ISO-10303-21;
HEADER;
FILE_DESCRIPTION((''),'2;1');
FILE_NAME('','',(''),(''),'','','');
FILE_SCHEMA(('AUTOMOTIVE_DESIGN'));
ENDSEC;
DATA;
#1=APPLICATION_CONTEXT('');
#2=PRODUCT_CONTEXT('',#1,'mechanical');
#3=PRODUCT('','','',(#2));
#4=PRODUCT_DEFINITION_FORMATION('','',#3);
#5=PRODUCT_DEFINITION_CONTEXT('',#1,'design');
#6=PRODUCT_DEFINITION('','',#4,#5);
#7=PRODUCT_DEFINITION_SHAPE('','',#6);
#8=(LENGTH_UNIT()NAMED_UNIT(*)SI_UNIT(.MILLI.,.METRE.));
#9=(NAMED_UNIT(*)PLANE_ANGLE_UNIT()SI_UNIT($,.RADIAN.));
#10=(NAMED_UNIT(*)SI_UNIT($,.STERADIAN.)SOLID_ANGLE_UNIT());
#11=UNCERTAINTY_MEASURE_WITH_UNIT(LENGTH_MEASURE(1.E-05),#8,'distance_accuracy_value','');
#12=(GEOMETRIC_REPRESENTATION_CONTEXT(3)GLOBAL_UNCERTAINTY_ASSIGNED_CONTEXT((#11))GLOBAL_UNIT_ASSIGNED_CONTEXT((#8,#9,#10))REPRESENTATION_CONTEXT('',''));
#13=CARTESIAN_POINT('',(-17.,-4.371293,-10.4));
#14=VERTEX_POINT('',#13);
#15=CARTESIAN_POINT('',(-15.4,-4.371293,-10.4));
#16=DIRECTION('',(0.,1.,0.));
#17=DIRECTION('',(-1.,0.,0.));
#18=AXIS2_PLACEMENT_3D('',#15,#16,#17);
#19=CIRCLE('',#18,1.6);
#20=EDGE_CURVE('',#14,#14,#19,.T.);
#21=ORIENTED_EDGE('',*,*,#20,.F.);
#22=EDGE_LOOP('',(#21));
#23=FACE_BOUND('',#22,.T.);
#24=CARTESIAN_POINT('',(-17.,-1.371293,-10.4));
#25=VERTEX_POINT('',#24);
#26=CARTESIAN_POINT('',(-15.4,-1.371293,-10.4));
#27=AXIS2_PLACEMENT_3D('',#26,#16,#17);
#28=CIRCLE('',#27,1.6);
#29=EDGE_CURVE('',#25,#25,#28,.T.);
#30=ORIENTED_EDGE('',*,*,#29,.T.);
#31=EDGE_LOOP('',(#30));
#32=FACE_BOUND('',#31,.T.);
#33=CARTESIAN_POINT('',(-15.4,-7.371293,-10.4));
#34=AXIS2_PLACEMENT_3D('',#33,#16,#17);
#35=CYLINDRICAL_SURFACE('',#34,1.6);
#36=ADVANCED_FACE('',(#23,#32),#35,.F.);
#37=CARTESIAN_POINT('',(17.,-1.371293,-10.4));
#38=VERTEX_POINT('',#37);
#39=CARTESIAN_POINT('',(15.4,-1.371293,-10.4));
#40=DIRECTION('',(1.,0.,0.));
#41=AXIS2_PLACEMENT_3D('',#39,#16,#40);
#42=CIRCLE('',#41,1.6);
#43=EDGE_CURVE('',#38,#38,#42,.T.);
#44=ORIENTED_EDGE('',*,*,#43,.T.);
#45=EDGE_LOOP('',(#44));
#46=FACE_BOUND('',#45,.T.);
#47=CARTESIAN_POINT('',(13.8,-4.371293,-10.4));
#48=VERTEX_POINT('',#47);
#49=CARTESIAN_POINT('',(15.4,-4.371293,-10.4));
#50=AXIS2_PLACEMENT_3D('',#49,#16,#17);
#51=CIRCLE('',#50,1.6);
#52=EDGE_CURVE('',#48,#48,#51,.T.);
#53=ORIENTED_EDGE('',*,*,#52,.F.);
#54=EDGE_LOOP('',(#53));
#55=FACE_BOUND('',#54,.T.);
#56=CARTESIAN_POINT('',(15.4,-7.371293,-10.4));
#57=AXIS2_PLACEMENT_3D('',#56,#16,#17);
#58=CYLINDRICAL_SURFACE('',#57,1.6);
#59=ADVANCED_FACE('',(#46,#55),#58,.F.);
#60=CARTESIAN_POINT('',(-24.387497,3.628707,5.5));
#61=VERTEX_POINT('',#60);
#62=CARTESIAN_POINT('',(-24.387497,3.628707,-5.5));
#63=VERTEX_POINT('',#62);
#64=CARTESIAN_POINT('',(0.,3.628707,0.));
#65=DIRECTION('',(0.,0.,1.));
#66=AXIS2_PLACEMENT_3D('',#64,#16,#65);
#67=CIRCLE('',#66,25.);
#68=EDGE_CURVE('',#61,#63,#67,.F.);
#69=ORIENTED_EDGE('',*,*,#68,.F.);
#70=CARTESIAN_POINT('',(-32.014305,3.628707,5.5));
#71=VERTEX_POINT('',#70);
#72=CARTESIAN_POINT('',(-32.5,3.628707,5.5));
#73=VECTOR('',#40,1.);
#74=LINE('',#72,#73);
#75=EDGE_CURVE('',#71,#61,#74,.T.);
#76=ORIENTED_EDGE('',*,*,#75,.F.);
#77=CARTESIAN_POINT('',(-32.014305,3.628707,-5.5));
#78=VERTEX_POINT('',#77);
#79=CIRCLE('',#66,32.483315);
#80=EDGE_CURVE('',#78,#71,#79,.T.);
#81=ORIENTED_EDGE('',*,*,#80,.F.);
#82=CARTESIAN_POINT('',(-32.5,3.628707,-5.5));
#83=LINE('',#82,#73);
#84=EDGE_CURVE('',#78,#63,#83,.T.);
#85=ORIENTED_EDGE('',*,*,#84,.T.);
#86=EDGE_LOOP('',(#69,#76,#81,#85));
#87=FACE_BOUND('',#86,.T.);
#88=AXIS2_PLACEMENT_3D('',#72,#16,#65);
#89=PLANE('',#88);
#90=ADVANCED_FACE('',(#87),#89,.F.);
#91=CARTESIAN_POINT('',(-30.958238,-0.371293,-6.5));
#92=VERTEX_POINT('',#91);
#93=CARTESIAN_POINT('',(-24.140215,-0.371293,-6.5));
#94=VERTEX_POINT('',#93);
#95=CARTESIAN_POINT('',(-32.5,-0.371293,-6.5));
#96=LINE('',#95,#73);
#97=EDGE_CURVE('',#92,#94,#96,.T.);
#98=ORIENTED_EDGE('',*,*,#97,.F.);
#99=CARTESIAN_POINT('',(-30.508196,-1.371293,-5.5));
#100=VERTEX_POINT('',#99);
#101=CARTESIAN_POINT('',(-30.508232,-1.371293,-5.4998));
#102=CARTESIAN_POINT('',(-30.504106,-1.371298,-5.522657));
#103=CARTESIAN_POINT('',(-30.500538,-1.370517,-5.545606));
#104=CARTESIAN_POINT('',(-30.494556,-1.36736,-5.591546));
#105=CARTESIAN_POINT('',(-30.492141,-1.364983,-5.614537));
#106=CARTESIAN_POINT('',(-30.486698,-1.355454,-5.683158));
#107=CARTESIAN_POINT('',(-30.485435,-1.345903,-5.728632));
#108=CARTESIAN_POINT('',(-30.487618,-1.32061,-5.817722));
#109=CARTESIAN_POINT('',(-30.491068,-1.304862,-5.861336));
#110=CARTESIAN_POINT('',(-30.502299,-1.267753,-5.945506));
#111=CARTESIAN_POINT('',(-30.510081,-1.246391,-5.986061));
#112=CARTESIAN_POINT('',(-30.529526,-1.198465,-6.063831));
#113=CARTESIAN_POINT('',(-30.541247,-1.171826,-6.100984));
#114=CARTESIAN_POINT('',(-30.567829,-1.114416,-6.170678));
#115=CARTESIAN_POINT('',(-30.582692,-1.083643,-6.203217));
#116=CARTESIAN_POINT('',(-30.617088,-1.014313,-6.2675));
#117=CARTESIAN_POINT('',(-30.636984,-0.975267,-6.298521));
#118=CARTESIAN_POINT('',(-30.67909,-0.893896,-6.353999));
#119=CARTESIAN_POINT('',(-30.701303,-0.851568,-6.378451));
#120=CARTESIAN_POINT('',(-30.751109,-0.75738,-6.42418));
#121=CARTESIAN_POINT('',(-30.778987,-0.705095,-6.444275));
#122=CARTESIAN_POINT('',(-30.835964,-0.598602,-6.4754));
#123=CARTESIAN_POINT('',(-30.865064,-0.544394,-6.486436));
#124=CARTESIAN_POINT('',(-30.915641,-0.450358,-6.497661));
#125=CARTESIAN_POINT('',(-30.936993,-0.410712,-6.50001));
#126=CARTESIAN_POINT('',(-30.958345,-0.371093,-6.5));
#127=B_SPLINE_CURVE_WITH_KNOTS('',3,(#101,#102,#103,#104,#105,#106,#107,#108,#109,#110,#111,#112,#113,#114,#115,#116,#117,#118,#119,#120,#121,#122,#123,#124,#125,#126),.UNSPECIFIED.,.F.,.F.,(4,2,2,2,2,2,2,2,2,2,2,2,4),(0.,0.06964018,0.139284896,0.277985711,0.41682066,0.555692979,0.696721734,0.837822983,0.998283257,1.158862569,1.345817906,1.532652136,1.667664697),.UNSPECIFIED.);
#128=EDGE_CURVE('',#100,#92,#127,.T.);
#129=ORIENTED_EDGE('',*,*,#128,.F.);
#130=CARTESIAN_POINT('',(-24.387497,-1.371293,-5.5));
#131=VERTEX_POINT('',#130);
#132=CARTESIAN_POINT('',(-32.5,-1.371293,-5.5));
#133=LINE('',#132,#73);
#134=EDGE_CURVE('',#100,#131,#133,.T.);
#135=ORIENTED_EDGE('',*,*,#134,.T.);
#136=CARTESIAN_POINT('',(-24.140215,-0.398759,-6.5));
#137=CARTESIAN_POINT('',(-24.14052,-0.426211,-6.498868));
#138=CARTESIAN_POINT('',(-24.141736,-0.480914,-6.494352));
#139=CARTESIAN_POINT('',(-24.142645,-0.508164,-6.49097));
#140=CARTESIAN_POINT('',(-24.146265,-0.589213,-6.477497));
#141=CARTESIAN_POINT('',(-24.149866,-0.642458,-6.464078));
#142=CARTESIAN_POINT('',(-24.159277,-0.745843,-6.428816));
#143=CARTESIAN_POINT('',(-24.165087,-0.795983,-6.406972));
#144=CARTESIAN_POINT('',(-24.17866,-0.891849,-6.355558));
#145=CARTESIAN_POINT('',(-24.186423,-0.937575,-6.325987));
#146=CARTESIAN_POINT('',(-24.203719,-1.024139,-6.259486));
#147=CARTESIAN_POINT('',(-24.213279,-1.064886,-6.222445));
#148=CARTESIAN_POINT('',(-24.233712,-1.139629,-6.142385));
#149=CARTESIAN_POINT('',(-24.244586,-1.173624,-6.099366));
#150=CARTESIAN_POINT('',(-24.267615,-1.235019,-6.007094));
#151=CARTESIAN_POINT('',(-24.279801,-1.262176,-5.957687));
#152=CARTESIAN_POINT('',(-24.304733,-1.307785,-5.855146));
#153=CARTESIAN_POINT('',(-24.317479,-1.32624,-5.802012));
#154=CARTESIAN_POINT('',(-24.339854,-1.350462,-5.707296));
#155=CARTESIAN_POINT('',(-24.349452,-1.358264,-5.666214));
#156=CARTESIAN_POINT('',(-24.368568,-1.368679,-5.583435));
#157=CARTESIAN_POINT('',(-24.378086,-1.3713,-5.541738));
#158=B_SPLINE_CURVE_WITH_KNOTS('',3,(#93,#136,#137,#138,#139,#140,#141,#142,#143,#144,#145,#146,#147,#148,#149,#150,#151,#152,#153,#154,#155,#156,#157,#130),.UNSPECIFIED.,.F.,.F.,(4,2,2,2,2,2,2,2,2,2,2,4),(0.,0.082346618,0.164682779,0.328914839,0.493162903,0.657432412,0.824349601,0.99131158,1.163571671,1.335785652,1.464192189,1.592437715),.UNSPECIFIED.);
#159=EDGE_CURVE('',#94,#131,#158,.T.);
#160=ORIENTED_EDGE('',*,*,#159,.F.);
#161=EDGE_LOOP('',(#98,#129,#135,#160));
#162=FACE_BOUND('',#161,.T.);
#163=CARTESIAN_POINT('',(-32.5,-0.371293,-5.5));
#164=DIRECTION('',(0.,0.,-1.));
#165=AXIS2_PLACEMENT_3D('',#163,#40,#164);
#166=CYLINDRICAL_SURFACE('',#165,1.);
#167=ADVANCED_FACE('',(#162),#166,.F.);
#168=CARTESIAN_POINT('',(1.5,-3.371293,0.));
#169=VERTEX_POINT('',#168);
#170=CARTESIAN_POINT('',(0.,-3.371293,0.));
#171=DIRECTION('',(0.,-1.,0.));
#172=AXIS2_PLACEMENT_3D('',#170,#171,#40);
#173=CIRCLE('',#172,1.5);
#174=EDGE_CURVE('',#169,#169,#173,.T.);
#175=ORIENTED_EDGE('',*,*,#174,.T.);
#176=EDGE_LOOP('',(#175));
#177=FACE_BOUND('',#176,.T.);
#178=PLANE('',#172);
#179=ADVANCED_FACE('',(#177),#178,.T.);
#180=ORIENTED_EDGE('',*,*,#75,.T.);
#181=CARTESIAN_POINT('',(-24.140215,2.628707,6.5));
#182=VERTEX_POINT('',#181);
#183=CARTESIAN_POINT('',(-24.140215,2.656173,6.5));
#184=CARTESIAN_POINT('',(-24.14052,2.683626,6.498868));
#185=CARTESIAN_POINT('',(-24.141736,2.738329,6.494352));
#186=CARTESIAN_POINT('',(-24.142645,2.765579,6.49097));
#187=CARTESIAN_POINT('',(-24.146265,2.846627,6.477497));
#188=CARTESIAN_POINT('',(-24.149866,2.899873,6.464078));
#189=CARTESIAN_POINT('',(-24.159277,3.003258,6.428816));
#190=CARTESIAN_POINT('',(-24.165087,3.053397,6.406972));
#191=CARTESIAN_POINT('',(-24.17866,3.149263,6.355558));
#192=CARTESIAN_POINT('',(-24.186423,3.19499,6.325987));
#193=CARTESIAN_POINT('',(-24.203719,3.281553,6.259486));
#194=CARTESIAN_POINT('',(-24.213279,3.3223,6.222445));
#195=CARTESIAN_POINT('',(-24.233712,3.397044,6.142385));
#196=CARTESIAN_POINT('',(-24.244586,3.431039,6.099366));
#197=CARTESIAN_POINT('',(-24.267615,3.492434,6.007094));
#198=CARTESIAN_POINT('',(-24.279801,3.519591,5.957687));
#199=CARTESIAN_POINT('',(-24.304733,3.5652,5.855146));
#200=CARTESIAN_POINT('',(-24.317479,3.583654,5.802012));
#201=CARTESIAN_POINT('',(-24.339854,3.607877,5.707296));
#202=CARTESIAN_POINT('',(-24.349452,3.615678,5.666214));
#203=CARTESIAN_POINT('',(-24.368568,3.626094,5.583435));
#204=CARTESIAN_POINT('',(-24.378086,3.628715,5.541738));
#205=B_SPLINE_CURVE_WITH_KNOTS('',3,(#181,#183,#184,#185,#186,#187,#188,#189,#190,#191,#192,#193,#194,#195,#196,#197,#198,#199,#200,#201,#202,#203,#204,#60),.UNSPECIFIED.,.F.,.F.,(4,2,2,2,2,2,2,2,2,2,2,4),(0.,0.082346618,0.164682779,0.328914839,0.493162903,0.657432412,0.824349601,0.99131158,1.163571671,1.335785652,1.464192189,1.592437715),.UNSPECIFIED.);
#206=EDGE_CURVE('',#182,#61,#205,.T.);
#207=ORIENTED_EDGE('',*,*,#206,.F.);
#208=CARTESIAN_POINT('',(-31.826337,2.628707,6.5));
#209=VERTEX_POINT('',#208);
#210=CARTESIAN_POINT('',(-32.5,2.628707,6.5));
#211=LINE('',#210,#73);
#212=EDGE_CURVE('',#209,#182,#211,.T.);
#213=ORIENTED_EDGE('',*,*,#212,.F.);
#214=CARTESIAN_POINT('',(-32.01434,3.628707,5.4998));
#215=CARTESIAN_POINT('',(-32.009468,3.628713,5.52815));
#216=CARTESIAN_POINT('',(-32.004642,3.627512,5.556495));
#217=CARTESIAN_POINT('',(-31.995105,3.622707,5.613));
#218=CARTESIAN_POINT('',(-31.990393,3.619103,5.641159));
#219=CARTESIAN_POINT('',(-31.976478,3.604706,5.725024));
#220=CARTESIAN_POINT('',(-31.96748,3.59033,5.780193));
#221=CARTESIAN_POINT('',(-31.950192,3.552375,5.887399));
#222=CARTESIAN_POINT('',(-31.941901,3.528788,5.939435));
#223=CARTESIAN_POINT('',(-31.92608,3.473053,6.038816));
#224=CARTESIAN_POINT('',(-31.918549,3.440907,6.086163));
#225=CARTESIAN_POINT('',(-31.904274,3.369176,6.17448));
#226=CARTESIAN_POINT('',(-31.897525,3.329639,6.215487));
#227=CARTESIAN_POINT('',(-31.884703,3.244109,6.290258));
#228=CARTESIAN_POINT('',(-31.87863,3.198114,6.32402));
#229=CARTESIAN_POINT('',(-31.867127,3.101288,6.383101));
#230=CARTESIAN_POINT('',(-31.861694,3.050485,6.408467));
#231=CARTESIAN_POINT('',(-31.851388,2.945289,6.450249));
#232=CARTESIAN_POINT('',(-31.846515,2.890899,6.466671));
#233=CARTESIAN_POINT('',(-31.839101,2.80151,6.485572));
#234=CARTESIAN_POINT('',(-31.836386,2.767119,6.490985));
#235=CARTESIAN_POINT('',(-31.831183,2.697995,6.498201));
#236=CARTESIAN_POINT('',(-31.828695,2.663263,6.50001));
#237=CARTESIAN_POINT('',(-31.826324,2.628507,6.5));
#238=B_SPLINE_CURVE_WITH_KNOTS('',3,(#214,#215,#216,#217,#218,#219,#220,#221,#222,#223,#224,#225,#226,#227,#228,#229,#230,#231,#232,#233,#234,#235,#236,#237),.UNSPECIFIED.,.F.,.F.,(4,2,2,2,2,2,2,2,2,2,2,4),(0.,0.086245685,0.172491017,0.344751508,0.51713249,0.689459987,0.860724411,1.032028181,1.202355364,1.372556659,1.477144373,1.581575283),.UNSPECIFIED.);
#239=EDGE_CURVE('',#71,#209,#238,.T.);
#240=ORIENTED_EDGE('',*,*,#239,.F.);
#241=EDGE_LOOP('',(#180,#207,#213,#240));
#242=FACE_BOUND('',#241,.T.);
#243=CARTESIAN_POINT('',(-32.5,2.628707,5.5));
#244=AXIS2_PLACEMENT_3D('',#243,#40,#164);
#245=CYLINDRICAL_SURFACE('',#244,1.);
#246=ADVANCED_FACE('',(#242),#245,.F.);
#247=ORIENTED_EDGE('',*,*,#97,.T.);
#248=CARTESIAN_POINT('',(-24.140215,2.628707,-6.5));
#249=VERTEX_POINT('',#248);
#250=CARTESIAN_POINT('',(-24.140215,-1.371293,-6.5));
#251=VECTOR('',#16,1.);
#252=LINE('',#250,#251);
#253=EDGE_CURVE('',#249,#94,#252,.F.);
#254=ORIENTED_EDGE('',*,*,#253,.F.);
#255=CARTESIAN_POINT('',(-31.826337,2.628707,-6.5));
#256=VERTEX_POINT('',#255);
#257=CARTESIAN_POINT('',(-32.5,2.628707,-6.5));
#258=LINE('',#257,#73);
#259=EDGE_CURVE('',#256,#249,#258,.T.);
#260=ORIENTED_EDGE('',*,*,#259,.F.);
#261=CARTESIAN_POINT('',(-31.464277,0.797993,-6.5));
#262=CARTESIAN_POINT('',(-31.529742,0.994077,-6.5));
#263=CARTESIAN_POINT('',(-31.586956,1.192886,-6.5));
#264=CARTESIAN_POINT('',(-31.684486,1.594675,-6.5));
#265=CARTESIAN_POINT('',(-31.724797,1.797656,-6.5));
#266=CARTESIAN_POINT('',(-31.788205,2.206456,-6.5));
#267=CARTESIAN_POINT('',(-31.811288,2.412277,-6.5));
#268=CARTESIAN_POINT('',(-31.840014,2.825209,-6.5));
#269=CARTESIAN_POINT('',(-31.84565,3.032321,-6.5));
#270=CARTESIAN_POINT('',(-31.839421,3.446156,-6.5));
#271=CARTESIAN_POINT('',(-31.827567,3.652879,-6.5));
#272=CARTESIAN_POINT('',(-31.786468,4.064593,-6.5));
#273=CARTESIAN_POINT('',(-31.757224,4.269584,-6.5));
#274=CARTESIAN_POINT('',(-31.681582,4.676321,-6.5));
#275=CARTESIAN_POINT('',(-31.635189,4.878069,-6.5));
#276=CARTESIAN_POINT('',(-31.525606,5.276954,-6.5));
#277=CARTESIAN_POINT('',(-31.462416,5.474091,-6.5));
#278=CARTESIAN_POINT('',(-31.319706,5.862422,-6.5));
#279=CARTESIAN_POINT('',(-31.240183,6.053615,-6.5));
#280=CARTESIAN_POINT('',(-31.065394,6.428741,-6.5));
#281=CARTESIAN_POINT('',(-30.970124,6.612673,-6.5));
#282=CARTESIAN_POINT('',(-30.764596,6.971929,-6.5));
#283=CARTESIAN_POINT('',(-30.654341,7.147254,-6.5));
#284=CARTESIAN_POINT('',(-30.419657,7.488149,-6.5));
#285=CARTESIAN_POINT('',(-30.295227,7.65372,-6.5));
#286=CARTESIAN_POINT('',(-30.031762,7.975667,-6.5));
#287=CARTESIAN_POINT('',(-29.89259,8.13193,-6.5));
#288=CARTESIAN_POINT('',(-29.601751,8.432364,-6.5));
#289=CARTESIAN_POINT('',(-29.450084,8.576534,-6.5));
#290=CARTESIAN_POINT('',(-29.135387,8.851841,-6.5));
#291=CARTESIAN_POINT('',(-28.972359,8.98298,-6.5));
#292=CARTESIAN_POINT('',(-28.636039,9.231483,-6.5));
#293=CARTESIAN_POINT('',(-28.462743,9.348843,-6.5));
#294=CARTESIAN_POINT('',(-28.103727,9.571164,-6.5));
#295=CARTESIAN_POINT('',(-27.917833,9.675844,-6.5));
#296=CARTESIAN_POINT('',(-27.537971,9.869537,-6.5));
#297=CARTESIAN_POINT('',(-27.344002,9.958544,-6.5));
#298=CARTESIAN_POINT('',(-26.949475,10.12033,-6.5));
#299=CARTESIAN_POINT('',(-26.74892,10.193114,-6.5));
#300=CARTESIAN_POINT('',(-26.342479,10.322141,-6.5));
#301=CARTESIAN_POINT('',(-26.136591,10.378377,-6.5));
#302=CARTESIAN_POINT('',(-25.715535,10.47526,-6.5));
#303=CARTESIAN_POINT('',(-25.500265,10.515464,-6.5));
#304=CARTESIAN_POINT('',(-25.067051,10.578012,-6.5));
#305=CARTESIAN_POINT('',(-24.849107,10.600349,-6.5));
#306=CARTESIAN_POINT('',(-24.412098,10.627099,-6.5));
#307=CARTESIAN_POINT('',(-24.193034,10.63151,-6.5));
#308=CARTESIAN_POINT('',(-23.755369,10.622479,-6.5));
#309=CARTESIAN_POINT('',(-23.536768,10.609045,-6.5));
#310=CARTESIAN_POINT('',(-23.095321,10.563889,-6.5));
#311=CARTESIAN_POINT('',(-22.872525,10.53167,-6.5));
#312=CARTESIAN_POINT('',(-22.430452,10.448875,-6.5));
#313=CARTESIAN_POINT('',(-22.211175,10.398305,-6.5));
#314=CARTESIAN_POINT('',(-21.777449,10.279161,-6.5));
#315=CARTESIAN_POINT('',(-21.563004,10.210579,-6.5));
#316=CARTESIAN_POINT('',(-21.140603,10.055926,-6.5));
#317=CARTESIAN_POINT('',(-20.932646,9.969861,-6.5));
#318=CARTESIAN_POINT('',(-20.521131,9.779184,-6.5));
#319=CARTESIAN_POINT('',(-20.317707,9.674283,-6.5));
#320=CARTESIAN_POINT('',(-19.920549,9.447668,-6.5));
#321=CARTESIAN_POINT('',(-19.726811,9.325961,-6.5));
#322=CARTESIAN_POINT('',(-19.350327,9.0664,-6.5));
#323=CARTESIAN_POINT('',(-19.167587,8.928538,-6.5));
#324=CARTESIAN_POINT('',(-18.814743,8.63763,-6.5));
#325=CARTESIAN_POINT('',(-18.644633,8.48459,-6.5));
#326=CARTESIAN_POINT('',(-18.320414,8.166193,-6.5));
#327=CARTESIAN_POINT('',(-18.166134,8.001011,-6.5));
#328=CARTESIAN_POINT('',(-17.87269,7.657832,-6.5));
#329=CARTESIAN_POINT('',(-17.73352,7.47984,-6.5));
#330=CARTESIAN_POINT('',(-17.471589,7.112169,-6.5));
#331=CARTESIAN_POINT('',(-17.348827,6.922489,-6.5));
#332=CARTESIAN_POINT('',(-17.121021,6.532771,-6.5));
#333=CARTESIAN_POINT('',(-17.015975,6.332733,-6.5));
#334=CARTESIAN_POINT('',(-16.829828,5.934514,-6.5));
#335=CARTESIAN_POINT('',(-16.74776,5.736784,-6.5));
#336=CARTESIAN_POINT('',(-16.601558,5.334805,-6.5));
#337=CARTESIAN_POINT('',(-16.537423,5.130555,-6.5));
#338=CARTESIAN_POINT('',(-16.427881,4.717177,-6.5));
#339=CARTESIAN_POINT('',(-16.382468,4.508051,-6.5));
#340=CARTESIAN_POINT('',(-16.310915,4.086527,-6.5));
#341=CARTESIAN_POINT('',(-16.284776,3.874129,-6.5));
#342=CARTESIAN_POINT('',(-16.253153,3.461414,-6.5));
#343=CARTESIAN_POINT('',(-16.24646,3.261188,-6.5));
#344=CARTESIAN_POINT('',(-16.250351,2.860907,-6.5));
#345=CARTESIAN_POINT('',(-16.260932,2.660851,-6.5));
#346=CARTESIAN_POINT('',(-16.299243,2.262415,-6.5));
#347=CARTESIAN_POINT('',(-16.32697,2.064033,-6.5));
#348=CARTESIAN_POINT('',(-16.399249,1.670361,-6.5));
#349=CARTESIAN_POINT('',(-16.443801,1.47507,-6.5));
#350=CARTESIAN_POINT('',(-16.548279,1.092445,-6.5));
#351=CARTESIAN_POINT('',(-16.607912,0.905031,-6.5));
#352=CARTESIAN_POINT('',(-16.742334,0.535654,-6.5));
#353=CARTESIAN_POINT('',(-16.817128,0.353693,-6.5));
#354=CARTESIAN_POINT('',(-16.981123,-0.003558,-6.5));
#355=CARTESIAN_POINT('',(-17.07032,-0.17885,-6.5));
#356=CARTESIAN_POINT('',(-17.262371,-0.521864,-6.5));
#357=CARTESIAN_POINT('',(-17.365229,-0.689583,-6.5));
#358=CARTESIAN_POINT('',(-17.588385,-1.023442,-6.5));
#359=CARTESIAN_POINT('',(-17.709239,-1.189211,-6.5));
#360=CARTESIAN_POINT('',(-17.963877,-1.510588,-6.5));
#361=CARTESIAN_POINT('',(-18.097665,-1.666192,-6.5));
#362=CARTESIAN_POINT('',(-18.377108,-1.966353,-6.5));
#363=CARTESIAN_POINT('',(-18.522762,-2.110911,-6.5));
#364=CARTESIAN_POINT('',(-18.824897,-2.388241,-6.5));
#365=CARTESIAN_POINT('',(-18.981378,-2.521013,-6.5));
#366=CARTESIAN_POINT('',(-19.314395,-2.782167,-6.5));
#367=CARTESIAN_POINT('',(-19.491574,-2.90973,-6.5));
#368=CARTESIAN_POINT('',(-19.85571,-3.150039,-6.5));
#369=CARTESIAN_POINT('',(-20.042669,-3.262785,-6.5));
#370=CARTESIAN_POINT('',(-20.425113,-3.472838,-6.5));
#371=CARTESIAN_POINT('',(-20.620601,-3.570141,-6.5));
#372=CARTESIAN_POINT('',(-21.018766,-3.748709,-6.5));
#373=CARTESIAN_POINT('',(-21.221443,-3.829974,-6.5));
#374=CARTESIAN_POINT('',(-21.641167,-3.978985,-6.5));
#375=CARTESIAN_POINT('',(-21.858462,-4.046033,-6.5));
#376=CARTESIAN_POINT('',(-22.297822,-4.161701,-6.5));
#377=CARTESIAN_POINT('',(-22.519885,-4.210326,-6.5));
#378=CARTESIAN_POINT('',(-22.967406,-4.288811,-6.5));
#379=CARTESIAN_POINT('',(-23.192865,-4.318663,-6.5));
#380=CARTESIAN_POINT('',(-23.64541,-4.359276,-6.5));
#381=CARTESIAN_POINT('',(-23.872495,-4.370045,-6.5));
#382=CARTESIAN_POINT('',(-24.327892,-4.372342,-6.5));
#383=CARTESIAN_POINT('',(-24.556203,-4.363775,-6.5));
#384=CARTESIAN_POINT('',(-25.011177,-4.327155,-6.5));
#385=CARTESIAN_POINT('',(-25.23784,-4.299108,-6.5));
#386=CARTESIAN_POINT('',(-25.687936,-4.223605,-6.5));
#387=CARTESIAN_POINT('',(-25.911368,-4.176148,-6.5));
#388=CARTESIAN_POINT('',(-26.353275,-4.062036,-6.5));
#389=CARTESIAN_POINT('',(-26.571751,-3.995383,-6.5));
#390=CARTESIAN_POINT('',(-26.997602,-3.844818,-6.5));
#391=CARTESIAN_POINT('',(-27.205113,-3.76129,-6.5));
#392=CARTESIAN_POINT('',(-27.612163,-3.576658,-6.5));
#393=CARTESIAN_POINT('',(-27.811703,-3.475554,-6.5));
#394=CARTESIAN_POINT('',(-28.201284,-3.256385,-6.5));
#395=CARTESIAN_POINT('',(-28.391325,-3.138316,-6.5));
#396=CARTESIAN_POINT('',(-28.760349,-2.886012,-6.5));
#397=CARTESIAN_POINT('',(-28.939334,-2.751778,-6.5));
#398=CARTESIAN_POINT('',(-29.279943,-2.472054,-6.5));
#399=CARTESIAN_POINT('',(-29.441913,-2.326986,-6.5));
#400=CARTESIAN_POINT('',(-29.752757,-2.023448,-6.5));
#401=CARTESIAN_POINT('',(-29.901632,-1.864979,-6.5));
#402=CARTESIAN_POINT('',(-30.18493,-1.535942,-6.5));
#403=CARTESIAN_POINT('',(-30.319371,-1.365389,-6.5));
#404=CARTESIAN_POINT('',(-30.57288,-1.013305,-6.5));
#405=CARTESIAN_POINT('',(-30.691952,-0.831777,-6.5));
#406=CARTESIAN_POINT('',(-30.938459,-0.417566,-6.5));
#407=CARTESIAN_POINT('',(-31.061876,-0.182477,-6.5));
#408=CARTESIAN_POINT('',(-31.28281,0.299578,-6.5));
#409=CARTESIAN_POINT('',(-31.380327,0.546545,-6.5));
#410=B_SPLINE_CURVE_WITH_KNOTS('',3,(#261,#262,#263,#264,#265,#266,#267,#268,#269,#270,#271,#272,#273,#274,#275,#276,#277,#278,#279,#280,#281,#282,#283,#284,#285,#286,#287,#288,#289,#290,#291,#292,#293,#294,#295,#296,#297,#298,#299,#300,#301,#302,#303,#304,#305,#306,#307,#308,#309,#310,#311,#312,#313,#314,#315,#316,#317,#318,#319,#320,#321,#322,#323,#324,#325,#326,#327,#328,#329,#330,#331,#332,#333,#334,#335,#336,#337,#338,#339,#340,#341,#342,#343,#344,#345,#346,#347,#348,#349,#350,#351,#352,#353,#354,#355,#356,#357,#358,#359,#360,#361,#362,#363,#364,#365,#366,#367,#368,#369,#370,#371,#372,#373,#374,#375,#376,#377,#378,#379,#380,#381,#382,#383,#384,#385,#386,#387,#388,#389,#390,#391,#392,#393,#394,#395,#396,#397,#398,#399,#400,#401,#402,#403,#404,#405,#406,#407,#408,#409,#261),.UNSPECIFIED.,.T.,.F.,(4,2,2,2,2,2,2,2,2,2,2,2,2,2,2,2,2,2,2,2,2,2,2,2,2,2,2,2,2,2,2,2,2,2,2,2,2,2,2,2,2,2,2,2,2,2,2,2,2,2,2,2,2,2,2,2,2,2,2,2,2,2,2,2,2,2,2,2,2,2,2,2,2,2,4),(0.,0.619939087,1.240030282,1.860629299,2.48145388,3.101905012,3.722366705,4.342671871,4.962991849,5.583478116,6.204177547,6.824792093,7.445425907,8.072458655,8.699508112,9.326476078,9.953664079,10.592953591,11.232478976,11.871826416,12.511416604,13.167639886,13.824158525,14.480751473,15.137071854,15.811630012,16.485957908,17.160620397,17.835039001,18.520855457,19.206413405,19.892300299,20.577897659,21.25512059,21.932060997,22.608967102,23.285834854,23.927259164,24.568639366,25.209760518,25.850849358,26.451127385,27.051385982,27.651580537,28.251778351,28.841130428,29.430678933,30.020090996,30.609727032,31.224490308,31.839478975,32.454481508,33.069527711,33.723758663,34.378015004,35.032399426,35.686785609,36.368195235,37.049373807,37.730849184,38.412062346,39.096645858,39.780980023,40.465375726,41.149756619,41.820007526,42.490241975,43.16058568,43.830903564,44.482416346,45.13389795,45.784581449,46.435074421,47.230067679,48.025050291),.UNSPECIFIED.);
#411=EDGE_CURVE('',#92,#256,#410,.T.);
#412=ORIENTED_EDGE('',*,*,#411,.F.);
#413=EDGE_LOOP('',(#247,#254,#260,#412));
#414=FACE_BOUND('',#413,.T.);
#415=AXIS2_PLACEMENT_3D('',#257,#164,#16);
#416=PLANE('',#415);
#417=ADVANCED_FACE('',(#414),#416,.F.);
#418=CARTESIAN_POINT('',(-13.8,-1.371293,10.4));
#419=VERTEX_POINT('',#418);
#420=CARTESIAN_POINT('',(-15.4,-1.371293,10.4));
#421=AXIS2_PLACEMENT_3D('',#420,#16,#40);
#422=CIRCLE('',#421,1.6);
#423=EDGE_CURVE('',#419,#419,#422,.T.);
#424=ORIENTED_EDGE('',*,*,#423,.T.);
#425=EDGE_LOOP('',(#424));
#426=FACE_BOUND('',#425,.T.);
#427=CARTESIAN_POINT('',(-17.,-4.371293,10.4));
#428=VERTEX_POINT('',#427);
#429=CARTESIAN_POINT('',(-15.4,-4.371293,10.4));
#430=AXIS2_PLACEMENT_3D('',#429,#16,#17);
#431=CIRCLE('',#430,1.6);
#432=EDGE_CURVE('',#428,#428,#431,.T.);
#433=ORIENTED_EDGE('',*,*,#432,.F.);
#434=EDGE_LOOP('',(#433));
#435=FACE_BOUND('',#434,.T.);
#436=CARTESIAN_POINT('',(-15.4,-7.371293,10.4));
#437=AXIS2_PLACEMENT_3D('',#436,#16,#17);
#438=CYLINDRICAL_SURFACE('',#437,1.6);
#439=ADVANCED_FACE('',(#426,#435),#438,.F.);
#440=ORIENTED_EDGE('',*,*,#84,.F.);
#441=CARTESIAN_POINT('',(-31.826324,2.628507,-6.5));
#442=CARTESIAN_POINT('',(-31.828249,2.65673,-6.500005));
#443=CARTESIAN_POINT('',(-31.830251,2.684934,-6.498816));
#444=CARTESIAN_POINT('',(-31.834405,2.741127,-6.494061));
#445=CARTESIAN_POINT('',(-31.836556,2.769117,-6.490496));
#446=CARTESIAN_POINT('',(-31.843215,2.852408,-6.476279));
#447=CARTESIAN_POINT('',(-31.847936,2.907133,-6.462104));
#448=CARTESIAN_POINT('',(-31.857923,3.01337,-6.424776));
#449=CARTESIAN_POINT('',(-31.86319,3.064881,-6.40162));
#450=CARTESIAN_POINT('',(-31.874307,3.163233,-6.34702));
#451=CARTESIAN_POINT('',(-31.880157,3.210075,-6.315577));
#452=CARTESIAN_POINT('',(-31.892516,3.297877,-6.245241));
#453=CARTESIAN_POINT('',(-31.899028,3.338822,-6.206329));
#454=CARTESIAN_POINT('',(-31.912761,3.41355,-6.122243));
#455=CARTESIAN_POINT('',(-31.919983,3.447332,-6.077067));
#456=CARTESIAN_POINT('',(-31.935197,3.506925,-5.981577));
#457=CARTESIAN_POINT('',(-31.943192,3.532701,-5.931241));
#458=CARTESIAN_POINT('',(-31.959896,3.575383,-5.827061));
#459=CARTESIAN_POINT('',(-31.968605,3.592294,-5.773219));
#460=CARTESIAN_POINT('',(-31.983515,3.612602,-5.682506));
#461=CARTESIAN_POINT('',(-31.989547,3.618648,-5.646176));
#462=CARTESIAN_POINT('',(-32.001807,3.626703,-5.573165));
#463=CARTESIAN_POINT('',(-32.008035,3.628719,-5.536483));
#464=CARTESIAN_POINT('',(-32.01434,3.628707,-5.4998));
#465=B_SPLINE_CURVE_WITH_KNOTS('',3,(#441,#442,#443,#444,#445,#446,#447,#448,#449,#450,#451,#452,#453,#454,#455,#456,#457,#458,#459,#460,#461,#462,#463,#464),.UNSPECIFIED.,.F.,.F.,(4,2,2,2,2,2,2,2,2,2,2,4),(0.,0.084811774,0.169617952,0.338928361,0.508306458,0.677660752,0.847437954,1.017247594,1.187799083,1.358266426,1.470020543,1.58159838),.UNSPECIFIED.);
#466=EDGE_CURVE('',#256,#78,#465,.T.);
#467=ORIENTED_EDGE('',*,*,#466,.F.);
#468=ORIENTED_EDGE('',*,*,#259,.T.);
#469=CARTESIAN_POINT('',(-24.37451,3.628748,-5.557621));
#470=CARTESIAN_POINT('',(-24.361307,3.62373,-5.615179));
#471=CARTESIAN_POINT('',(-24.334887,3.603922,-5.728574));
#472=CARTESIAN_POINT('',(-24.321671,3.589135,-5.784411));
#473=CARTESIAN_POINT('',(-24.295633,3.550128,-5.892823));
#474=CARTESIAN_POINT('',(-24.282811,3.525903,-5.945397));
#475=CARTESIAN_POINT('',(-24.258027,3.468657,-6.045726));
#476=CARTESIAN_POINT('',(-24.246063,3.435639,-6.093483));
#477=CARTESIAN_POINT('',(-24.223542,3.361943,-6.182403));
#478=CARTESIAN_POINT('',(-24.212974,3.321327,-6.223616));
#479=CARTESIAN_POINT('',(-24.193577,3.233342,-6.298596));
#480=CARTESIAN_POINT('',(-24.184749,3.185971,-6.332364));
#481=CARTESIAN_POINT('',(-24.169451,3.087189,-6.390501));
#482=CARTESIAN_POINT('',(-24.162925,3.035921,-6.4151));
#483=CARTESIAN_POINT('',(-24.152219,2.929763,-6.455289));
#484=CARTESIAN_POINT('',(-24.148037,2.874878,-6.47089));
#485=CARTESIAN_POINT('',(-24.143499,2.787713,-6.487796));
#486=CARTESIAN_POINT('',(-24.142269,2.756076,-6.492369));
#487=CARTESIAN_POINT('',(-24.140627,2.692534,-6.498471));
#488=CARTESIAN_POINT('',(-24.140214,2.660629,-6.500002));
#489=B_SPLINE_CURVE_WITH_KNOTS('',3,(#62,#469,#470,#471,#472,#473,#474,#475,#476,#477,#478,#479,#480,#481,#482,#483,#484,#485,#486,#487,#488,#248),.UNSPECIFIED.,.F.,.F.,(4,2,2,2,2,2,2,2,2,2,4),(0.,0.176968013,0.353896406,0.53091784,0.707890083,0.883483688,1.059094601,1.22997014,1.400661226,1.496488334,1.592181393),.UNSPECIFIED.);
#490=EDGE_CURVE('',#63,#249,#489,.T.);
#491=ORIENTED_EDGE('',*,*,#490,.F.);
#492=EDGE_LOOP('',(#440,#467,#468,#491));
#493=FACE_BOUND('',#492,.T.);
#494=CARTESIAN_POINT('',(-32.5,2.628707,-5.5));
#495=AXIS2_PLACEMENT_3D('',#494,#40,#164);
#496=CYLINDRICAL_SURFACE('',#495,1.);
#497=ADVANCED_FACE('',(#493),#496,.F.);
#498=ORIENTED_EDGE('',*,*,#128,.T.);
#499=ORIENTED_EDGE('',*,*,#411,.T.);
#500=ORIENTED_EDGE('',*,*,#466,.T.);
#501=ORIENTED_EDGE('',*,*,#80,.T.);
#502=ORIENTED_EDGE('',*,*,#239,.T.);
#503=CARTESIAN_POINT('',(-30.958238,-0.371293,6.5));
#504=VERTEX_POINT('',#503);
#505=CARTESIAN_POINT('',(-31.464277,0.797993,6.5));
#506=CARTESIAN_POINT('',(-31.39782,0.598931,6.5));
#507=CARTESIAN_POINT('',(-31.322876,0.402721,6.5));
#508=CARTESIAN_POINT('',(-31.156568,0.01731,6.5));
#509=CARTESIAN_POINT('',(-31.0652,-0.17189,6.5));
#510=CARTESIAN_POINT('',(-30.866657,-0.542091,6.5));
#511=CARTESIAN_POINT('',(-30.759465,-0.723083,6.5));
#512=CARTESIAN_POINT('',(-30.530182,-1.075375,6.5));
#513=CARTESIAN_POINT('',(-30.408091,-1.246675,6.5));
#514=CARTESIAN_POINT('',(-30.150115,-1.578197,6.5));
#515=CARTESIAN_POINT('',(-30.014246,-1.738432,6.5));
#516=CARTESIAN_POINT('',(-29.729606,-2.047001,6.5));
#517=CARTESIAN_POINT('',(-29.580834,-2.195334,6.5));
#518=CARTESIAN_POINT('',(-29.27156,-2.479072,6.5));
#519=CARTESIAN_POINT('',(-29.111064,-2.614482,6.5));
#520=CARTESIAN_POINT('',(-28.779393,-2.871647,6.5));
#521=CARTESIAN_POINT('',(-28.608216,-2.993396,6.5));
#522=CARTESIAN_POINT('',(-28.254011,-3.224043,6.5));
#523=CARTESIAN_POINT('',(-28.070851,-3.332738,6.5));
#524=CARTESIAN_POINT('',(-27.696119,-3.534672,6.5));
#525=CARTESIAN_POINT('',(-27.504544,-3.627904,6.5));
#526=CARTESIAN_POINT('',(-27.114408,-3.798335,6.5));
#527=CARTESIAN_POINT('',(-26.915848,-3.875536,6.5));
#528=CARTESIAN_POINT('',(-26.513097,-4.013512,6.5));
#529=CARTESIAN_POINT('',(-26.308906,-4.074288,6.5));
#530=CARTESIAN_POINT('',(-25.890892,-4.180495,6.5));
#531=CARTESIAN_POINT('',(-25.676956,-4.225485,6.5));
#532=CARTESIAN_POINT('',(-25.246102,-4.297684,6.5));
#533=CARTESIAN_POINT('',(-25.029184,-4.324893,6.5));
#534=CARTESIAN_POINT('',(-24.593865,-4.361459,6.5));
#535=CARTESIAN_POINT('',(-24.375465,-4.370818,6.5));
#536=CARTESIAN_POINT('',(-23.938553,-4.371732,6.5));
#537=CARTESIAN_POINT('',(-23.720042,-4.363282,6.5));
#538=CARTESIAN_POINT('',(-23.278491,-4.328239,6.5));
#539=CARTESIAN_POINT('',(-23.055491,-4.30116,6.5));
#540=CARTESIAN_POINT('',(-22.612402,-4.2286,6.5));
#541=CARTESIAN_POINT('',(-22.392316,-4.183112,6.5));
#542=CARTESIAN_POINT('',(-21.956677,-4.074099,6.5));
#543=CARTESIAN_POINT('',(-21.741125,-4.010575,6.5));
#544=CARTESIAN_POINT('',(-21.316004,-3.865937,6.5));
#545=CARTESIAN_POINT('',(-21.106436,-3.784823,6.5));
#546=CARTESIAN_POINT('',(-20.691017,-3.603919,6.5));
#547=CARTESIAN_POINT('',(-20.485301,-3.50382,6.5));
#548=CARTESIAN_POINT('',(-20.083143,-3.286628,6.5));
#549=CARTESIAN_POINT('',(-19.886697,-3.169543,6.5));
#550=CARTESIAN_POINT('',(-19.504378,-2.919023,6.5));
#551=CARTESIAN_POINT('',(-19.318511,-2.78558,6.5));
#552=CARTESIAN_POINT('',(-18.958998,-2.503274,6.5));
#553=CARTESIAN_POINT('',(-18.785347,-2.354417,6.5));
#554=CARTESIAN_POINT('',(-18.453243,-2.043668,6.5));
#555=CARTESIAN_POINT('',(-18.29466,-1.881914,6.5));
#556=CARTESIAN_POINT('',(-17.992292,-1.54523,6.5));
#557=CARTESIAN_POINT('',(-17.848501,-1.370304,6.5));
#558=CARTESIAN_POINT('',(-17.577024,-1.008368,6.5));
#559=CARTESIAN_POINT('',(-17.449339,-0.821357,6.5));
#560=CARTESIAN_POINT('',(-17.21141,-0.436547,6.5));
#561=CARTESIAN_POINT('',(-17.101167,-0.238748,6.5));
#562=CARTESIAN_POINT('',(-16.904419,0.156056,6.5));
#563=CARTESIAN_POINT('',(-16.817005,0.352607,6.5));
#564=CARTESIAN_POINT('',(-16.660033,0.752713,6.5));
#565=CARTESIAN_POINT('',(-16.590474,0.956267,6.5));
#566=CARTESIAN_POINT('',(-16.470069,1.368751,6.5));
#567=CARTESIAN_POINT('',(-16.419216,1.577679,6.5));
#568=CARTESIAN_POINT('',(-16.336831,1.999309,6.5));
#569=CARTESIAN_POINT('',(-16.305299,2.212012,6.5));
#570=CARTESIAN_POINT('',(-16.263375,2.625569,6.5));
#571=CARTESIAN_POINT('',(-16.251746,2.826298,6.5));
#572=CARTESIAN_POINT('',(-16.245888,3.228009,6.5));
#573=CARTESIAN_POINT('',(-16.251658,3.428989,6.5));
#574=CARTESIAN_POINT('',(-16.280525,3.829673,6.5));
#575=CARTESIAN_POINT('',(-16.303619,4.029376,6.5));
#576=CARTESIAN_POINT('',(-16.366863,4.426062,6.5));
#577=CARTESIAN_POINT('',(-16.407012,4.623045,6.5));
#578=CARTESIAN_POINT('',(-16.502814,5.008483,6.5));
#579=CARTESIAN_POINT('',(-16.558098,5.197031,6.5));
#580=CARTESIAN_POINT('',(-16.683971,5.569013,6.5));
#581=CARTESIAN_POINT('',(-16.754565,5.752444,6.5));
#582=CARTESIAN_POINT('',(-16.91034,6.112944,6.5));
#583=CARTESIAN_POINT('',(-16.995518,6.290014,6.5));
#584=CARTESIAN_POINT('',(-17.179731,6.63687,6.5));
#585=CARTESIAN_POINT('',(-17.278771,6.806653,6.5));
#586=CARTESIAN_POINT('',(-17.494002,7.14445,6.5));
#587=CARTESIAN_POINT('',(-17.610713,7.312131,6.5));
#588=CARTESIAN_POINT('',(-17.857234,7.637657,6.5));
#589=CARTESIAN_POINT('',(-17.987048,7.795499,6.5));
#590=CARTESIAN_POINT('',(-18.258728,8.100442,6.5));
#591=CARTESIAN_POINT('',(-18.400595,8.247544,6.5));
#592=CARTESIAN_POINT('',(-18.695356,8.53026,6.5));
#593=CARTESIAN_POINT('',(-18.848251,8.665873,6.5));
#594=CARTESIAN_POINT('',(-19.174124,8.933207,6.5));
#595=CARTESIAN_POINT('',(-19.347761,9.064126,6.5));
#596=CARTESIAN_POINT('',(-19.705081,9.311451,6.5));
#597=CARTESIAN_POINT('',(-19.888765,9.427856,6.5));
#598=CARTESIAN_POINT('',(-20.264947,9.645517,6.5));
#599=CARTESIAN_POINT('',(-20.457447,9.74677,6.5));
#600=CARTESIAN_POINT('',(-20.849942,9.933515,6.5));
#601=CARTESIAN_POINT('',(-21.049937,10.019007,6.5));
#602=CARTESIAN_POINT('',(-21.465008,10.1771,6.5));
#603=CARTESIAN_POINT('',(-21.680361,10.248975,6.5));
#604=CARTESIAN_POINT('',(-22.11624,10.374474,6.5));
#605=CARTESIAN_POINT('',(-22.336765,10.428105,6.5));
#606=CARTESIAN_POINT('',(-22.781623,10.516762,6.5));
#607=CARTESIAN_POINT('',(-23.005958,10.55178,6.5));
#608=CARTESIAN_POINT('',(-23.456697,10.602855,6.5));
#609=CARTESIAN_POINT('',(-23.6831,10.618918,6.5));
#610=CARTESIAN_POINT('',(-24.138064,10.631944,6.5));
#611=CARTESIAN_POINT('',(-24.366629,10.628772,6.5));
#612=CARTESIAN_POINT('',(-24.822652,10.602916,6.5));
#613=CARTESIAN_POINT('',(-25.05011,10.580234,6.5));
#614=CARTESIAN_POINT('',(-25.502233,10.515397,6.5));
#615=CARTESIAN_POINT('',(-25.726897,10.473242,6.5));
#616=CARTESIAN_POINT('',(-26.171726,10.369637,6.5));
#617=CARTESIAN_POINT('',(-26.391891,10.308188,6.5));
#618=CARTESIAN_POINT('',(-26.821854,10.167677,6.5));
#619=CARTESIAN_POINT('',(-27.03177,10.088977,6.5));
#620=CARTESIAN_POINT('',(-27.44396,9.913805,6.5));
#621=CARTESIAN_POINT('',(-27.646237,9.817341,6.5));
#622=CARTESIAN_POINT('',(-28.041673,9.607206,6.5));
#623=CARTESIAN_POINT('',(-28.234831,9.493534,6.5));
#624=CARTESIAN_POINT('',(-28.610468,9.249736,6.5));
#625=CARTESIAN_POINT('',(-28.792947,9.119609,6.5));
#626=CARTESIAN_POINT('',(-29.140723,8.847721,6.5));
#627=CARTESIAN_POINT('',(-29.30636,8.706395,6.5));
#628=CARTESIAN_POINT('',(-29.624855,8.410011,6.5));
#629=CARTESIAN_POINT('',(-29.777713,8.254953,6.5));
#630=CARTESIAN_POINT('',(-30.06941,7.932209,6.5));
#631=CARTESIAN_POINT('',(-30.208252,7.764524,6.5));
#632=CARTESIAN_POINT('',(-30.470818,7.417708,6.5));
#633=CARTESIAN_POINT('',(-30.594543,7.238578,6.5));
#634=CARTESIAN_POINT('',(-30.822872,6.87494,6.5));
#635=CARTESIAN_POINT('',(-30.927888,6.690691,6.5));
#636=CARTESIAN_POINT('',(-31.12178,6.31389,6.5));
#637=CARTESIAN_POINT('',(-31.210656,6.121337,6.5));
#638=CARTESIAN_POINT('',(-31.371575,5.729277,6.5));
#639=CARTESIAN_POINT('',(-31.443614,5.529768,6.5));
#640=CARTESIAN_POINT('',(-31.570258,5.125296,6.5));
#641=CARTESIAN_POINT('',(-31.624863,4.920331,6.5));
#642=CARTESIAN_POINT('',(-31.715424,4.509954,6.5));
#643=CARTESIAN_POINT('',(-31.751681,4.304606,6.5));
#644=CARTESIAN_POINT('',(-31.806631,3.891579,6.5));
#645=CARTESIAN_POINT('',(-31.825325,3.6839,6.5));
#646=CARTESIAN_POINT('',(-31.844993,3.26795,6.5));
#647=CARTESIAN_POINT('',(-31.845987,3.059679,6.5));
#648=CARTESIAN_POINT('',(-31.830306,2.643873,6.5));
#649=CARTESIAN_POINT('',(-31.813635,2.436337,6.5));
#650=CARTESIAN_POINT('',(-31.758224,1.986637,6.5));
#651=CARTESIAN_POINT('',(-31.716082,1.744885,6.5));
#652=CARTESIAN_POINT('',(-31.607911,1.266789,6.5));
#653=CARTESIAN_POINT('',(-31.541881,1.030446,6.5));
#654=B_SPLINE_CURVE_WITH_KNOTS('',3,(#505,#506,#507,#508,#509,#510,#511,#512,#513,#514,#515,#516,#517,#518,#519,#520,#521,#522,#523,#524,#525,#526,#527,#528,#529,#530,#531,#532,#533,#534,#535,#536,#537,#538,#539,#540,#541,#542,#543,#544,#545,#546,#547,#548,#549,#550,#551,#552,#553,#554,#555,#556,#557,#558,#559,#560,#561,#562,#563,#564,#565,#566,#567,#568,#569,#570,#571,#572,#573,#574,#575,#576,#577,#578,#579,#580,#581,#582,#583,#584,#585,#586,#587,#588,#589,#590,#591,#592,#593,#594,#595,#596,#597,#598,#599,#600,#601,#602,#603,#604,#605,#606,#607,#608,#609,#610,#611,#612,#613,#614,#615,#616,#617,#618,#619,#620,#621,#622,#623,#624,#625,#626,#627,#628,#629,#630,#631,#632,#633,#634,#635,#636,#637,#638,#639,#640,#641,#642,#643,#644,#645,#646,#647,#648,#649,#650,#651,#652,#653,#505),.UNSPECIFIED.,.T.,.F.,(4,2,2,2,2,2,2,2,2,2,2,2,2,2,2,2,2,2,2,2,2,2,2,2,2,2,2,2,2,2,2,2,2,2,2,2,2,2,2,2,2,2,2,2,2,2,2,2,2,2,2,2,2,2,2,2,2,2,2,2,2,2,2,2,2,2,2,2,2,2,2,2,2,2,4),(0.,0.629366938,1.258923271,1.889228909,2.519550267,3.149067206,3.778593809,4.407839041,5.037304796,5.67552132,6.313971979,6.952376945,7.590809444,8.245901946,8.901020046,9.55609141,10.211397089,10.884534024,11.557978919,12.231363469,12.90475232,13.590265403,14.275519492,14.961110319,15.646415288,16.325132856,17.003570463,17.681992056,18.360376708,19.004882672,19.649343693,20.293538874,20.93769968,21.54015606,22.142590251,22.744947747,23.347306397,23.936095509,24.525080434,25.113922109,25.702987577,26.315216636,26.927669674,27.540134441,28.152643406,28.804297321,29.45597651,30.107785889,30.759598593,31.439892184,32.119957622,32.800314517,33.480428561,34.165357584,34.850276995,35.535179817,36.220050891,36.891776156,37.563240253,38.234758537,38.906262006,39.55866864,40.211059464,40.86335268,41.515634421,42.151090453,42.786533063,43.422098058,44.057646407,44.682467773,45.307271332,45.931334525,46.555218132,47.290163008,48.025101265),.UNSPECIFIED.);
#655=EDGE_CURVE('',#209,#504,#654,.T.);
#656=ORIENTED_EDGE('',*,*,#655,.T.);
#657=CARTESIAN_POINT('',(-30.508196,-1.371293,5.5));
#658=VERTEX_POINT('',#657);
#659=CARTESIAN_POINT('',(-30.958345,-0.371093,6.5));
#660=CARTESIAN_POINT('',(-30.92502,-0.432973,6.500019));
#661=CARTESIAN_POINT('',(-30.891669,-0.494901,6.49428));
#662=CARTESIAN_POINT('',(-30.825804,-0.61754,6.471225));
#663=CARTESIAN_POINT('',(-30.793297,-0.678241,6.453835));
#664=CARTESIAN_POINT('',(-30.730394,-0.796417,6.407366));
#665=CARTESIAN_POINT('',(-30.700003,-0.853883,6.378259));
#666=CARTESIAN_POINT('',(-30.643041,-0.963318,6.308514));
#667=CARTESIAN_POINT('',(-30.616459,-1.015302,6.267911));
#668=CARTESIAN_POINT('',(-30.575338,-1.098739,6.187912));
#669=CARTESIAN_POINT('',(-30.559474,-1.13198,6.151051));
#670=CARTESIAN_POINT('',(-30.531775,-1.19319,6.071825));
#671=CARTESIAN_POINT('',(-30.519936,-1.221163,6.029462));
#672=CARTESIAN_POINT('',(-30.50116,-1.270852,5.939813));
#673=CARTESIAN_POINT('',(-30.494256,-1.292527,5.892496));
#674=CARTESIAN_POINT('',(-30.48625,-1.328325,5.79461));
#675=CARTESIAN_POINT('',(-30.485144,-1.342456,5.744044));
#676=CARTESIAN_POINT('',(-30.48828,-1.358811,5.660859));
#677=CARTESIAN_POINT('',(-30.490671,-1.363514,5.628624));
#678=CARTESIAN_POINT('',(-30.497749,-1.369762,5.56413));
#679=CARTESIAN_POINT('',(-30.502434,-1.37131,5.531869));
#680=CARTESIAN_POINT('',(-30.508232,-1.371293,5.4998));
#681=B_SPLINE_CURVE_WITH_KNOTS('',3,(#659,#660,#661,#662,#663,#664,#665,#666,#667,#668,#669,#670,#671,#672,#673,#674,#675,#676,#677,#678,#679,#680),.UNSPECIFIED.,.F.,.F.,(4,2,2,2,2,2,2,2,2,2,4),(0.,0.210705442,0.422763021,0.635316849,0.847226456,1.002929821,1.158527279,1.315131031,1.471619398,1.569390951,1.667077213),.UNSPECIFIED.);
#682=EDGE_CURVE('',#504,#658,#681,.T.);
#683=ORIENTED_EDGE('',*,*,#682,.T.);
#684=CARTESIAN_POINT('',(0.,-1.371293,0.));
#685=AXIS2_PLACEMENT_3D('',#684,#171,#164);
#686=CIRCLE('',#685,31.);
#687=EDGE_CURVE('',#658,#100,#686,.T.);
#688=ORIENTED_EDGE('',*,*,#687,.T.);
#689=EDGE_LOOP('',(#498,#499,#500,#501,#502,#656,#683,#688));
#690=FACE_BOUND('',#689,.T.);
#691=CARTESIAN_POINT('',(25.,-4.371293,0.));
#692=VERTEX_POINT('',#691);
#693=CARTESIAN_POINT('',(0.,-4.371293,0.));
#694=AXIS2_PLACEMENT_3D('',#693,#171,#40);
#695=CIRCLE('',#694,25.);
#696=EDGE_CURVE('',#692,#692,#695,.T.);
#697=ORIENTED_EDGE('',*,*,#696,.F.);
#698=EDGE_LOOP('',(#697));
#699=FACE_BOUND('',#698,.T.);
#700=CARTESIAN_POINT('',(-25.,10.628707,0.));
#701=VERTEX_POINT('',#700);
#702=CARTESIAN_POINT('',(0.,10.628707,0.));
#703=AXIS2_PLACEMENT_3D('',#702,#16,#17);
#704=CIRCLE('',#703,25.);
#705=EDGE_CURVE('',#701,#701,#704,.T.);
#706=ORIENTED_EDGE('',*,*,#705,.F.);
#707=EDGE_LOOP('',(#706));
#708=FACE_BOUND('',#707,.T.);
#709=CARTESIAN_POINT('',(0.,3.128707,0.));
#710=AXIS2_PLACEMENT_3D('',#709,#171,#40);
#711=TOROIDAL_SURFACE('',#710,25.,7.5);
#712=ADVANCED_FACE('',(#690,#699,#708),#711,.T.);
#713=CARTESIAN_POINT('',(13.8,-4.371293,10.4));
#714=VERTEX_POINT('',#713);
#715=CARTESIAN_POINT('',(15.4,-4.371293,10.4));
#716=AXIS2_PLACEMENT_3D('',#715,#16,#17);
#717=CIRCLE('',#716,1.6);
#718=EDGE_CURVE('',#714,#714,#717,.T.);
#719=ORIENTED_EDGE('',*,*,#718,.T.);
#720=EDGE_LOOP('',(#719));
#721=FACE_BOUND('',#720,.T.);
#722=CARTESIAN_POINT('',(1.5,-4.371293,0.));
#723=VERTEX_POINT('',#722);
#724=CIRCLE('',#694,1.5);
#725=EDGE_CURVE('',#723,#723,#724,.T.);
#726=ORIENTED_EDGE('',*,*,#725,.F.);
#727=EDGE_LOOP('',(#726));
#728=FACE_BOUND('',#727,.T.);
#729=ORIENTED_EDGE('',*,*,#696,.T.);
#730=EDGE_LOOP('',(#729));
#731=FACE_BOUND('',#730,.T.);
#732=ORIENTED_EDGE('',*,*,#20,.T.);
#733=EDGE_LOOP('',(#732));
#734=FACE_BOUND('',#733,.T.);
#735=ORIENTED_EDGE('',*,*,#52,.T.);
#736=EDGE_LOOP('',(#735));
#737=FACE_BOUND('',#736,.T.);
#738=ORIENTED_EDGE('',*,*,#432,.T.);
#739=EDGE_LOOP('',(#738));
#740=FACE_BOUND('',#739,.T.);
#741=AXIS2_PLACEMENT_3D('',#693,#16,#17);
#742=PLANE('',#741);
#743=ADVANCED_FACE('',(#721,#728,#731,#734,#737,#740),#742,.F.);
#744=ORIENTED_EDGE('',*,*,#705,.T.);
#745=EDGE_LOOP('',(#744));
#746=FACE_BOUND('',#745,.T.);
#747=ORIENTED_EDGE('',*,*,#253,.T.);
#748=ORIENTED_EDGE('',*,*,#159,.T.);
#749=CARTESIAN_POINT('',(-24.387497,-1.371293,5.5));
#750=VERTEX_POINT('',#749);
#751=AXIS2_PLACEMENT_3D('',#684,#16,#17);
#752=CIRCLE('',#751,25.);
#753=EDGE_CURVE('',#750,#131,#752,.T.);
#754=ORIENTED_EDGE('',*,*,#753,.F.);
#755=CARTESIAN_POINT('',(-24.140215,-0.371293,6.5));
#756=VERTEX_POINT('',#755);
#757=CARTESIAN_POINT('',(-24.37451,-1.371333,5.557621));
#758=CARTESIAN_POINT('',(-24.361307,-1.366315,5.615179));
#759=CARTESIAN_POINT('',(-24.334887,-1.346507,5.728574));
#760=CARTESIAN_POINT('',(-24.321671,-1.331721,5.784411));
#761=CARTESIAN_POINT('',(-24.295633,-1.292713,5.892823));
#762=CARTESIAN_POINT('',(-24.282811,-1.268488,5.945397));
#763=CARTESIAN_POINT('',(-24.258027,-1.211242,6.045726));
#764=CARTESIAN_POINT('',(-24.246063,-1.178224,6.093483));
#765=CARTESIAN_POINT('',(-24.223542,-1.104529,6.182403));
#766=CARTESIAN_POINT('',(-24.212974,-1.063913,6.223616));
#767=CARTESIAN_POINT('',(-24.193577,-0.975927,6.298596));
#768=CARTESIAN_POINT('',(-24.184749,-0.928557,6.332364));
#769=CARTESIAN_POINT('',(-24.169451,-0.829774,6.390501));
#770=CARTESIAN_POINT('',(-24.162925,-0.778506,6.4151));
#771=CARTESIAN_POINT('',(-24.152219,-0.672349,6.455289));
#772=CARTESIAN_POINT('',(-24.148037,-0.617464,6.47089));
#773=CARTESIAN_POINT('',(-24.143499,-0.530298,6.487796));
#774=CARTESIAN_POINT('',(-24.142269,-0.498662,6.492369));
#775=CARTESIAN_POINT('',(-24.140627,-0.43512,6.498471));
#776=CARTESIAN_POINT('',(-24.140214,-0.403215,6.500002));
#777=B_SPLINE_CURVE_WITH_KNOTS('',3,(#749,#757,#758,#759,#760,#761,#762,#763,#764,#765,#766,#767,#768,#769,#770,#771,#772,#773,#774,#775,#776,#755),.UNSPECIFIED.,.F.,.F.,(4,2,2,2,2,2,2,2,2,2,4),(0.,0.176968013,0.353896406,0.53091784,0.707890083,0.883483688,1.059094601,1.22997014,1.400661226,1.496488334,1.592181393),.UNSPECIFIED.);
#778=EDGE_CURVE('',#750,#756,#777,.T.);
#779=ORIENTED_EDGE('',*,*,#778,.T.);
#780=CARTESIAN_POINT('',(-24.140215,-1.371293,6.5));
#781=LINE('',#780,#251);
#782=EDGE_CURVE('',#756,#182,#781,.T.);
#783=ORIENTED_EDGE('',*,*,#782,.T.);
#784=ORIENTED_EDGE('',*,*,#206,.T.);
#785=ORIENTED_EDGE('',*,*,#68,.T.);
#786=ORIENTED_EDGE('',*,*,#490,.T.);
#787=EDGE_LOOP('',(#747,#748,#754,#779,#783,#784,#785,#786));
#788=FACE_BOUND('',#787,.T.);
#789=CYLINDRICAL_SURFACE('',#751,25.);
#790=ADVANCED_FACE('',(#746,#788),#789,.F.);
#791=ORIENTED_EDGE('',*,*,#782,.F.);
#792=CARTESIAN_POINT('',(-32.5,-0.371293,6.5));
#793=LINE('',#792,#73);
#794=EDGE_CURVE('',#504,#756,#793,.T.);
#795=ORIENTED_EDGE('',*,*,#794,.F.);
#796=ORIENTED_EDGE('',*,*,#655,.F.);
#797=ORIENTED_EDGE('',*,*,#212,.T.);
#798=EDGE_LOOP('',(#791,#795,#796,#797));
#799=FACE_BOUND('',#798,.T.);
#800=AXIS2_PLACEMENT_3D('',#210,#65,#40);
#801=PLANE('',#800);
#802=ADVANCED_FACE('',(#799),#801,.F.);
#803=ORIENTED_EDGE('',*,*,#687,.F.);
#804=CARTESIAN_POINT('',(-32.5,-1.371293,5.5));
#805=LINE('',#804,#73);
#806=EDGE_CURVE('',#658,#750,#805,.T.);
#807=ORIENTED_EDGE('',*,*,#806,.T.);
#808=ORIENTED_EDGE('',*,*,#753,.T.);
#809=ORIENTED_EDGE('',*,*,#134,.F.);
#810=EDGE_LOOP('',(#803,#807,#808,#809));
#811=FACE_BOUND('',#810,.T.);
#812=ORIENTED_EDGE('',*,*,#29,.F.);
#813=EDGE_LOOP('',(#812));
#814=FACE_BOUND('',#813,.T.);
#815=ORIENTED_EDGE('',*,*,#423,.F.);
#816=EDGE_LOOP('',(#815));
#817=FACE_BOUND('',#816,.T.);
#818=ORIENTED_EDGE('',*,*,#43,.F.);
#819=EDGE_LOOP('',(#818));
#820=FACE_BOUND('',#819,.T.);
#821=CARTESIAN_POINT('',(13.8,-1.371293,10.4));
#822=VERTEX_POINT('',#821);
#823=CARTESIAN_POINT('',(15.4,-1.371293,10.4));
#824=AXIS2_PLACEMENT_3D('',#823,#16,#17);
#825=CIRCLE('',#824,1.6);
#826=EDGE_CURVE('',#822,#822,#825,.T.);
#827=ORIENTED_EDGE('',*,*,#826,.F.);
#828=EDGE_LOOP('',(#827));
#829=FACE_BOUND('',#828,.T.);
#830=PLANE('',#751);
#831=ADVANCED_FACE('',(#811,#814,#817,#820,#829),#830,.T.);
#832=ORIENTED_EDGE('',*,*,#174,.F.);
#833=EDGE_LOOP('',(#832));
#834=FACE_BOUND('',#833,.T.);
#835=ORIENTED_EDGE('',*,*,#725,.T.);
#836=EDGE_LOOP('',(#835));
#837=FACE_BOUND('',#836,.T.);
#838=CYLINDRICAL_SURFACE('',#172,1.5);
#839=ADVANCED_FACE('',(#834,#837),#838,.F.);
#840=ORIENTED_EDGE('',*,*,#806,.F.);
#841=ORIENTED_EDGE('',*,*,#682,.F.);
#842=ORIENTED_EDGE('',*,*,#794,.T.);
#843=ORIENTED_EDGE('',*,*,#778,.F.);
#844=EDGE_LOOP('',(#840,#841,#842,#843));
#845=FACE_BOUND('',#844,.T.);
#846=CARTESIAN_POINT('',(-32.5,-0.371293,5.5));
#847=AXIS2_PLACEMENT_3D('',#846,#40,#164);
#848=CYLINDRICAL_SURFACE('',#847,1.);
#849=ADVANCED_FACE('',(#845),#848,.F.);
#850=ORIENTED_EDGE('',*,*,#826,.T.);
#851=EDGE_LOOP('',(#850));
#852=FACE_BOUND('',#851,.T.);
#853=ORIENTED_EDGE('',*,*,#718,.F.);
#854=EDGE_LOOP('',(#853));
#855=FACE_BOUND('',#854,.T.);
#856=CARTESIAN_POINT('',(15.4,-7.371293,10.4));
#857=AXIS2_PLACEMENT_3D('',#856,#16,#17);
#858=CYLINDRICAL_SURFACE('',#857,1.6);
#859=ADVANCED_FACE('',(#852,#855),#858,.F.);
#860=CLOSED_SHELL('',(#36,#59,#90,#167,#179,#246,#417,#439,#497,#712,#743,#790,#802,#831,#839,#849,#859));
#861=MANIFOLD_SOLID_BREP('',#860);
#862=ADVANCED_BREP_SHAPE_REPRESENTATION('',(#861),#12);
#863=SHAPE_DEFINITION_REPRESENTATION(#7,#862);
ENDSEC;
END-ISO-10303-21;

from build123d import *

# Parameters (mm, degrees)
SKETCH3_R          = 25
CUT_EXTRUDE2_DEPTH = 12
SKETCH4_R          = 1.6
CUT_EXTRUDE3_DEPTH = 6
SKETCH5_R          = 1.5
CUT_EXTRUDE4_DEPTH = 1
CUT_EXTRUDE6_DEPTH = 48.174881361


with BuildPart() as part:
    # Sketch1 → Revolve1 (revolve)
    with BuildSketch(Plane.XY):
        with BuildLine():
            Line((0, -4.371292721), (0, 10.628707279))
            Line((0, 10.628707279), (-25, 10.628707279))
            ThreePointArc((-25, 10.628707279), (-32.5, 3.128707279), (-25, -4.371292721))
            Line((-25, -4.371292721), (0, -4.371292721))
        make_face()
    revolve(axis=Axis((0, -4.371292721, 0), (0, 1, 0)))

    # Sketch3 → Cut-Extrude2 (cut)
    with BuildSketch(Plane(origin=(0, 10.628707279, 0), x_dir=(1, 0, 0), z_dir=(0, 1, 0))):
        Circle(SKETCH3_R)
    extrude(amount=-CUT_EXTRUDE2_DEPTH, mode=Mode.SUBTRACT)

    # Sketch4 → Cut-Extrude3 (cut)
    with BuildSketch(Plane(origin=(0, -1.371292721, 0), x_dir=(1, 0, 0), z_dir=(0, 1, 0))):
        with Locations((-15.4, 10.4)):
            Circle(SKETCH4_R)
        with Locations((15.4, 10.4)):
            Circle(SKETCH4_R)
        with Locations((15.4, -10.4)):
            Circle(SKETCH4_R)
        with Locations((-15.4, -10.4)):
            Circle(SKETCH4_R)
    extrude(amount=-CUT_EXTRUDE3_DEPTH, mode=Mode.SUBTRACT)

    # Sketch5 → Cut-Extrude4 (cut)
    with BuildSketch(Plane.XZ.offset(4.371292721)):
        Circle(SKETCH5_R)
    extrude(amount=-CUT_EXTRUDE4_DEPTH, mode=Mode.SUBTRACT)

    # Sketch8 → Cut-Extrude6 (cut, through all)
    with BuildSketch(Plane(origin=(0, 0, 0), x_dir=(0, 0, -1), z_dir=(1, 0, 0))):
        with BuildLine():
            Line((-5.5, 3.628707279), (5.5, 3.628707279))
            ThreePointArc((5.5, 3.628707279), (6.207106781, 3.33581406), (6.5, 2.628707279))
            Line((6.5, 2.628707279), (6.5, -0.371292721))
            ThreePointArc((6.5, -0.371292721), (6.207106781, -1.078399502), (5.5, -1.371292721))
            Line((5.5, -1.371292721), (-5.5, -1.371292721))
            ThreePointArc((-5.5, -1.371292721), (-6.207106781, -1.078399502), (-6.5, -0.371292721))
            Line((-6.5, -0.371292721), (-6.5, 2.628707279))
            ThreePointArc((-6.5, 2.628707279), (-6.207106781, 3.33581406), (-5.5, 3.628707279))
        make_face()
    extrude(amount=-CUT_EXTRUDE6_DEPTH, mode=Mode.SUBTRACT)


solid = part.part
